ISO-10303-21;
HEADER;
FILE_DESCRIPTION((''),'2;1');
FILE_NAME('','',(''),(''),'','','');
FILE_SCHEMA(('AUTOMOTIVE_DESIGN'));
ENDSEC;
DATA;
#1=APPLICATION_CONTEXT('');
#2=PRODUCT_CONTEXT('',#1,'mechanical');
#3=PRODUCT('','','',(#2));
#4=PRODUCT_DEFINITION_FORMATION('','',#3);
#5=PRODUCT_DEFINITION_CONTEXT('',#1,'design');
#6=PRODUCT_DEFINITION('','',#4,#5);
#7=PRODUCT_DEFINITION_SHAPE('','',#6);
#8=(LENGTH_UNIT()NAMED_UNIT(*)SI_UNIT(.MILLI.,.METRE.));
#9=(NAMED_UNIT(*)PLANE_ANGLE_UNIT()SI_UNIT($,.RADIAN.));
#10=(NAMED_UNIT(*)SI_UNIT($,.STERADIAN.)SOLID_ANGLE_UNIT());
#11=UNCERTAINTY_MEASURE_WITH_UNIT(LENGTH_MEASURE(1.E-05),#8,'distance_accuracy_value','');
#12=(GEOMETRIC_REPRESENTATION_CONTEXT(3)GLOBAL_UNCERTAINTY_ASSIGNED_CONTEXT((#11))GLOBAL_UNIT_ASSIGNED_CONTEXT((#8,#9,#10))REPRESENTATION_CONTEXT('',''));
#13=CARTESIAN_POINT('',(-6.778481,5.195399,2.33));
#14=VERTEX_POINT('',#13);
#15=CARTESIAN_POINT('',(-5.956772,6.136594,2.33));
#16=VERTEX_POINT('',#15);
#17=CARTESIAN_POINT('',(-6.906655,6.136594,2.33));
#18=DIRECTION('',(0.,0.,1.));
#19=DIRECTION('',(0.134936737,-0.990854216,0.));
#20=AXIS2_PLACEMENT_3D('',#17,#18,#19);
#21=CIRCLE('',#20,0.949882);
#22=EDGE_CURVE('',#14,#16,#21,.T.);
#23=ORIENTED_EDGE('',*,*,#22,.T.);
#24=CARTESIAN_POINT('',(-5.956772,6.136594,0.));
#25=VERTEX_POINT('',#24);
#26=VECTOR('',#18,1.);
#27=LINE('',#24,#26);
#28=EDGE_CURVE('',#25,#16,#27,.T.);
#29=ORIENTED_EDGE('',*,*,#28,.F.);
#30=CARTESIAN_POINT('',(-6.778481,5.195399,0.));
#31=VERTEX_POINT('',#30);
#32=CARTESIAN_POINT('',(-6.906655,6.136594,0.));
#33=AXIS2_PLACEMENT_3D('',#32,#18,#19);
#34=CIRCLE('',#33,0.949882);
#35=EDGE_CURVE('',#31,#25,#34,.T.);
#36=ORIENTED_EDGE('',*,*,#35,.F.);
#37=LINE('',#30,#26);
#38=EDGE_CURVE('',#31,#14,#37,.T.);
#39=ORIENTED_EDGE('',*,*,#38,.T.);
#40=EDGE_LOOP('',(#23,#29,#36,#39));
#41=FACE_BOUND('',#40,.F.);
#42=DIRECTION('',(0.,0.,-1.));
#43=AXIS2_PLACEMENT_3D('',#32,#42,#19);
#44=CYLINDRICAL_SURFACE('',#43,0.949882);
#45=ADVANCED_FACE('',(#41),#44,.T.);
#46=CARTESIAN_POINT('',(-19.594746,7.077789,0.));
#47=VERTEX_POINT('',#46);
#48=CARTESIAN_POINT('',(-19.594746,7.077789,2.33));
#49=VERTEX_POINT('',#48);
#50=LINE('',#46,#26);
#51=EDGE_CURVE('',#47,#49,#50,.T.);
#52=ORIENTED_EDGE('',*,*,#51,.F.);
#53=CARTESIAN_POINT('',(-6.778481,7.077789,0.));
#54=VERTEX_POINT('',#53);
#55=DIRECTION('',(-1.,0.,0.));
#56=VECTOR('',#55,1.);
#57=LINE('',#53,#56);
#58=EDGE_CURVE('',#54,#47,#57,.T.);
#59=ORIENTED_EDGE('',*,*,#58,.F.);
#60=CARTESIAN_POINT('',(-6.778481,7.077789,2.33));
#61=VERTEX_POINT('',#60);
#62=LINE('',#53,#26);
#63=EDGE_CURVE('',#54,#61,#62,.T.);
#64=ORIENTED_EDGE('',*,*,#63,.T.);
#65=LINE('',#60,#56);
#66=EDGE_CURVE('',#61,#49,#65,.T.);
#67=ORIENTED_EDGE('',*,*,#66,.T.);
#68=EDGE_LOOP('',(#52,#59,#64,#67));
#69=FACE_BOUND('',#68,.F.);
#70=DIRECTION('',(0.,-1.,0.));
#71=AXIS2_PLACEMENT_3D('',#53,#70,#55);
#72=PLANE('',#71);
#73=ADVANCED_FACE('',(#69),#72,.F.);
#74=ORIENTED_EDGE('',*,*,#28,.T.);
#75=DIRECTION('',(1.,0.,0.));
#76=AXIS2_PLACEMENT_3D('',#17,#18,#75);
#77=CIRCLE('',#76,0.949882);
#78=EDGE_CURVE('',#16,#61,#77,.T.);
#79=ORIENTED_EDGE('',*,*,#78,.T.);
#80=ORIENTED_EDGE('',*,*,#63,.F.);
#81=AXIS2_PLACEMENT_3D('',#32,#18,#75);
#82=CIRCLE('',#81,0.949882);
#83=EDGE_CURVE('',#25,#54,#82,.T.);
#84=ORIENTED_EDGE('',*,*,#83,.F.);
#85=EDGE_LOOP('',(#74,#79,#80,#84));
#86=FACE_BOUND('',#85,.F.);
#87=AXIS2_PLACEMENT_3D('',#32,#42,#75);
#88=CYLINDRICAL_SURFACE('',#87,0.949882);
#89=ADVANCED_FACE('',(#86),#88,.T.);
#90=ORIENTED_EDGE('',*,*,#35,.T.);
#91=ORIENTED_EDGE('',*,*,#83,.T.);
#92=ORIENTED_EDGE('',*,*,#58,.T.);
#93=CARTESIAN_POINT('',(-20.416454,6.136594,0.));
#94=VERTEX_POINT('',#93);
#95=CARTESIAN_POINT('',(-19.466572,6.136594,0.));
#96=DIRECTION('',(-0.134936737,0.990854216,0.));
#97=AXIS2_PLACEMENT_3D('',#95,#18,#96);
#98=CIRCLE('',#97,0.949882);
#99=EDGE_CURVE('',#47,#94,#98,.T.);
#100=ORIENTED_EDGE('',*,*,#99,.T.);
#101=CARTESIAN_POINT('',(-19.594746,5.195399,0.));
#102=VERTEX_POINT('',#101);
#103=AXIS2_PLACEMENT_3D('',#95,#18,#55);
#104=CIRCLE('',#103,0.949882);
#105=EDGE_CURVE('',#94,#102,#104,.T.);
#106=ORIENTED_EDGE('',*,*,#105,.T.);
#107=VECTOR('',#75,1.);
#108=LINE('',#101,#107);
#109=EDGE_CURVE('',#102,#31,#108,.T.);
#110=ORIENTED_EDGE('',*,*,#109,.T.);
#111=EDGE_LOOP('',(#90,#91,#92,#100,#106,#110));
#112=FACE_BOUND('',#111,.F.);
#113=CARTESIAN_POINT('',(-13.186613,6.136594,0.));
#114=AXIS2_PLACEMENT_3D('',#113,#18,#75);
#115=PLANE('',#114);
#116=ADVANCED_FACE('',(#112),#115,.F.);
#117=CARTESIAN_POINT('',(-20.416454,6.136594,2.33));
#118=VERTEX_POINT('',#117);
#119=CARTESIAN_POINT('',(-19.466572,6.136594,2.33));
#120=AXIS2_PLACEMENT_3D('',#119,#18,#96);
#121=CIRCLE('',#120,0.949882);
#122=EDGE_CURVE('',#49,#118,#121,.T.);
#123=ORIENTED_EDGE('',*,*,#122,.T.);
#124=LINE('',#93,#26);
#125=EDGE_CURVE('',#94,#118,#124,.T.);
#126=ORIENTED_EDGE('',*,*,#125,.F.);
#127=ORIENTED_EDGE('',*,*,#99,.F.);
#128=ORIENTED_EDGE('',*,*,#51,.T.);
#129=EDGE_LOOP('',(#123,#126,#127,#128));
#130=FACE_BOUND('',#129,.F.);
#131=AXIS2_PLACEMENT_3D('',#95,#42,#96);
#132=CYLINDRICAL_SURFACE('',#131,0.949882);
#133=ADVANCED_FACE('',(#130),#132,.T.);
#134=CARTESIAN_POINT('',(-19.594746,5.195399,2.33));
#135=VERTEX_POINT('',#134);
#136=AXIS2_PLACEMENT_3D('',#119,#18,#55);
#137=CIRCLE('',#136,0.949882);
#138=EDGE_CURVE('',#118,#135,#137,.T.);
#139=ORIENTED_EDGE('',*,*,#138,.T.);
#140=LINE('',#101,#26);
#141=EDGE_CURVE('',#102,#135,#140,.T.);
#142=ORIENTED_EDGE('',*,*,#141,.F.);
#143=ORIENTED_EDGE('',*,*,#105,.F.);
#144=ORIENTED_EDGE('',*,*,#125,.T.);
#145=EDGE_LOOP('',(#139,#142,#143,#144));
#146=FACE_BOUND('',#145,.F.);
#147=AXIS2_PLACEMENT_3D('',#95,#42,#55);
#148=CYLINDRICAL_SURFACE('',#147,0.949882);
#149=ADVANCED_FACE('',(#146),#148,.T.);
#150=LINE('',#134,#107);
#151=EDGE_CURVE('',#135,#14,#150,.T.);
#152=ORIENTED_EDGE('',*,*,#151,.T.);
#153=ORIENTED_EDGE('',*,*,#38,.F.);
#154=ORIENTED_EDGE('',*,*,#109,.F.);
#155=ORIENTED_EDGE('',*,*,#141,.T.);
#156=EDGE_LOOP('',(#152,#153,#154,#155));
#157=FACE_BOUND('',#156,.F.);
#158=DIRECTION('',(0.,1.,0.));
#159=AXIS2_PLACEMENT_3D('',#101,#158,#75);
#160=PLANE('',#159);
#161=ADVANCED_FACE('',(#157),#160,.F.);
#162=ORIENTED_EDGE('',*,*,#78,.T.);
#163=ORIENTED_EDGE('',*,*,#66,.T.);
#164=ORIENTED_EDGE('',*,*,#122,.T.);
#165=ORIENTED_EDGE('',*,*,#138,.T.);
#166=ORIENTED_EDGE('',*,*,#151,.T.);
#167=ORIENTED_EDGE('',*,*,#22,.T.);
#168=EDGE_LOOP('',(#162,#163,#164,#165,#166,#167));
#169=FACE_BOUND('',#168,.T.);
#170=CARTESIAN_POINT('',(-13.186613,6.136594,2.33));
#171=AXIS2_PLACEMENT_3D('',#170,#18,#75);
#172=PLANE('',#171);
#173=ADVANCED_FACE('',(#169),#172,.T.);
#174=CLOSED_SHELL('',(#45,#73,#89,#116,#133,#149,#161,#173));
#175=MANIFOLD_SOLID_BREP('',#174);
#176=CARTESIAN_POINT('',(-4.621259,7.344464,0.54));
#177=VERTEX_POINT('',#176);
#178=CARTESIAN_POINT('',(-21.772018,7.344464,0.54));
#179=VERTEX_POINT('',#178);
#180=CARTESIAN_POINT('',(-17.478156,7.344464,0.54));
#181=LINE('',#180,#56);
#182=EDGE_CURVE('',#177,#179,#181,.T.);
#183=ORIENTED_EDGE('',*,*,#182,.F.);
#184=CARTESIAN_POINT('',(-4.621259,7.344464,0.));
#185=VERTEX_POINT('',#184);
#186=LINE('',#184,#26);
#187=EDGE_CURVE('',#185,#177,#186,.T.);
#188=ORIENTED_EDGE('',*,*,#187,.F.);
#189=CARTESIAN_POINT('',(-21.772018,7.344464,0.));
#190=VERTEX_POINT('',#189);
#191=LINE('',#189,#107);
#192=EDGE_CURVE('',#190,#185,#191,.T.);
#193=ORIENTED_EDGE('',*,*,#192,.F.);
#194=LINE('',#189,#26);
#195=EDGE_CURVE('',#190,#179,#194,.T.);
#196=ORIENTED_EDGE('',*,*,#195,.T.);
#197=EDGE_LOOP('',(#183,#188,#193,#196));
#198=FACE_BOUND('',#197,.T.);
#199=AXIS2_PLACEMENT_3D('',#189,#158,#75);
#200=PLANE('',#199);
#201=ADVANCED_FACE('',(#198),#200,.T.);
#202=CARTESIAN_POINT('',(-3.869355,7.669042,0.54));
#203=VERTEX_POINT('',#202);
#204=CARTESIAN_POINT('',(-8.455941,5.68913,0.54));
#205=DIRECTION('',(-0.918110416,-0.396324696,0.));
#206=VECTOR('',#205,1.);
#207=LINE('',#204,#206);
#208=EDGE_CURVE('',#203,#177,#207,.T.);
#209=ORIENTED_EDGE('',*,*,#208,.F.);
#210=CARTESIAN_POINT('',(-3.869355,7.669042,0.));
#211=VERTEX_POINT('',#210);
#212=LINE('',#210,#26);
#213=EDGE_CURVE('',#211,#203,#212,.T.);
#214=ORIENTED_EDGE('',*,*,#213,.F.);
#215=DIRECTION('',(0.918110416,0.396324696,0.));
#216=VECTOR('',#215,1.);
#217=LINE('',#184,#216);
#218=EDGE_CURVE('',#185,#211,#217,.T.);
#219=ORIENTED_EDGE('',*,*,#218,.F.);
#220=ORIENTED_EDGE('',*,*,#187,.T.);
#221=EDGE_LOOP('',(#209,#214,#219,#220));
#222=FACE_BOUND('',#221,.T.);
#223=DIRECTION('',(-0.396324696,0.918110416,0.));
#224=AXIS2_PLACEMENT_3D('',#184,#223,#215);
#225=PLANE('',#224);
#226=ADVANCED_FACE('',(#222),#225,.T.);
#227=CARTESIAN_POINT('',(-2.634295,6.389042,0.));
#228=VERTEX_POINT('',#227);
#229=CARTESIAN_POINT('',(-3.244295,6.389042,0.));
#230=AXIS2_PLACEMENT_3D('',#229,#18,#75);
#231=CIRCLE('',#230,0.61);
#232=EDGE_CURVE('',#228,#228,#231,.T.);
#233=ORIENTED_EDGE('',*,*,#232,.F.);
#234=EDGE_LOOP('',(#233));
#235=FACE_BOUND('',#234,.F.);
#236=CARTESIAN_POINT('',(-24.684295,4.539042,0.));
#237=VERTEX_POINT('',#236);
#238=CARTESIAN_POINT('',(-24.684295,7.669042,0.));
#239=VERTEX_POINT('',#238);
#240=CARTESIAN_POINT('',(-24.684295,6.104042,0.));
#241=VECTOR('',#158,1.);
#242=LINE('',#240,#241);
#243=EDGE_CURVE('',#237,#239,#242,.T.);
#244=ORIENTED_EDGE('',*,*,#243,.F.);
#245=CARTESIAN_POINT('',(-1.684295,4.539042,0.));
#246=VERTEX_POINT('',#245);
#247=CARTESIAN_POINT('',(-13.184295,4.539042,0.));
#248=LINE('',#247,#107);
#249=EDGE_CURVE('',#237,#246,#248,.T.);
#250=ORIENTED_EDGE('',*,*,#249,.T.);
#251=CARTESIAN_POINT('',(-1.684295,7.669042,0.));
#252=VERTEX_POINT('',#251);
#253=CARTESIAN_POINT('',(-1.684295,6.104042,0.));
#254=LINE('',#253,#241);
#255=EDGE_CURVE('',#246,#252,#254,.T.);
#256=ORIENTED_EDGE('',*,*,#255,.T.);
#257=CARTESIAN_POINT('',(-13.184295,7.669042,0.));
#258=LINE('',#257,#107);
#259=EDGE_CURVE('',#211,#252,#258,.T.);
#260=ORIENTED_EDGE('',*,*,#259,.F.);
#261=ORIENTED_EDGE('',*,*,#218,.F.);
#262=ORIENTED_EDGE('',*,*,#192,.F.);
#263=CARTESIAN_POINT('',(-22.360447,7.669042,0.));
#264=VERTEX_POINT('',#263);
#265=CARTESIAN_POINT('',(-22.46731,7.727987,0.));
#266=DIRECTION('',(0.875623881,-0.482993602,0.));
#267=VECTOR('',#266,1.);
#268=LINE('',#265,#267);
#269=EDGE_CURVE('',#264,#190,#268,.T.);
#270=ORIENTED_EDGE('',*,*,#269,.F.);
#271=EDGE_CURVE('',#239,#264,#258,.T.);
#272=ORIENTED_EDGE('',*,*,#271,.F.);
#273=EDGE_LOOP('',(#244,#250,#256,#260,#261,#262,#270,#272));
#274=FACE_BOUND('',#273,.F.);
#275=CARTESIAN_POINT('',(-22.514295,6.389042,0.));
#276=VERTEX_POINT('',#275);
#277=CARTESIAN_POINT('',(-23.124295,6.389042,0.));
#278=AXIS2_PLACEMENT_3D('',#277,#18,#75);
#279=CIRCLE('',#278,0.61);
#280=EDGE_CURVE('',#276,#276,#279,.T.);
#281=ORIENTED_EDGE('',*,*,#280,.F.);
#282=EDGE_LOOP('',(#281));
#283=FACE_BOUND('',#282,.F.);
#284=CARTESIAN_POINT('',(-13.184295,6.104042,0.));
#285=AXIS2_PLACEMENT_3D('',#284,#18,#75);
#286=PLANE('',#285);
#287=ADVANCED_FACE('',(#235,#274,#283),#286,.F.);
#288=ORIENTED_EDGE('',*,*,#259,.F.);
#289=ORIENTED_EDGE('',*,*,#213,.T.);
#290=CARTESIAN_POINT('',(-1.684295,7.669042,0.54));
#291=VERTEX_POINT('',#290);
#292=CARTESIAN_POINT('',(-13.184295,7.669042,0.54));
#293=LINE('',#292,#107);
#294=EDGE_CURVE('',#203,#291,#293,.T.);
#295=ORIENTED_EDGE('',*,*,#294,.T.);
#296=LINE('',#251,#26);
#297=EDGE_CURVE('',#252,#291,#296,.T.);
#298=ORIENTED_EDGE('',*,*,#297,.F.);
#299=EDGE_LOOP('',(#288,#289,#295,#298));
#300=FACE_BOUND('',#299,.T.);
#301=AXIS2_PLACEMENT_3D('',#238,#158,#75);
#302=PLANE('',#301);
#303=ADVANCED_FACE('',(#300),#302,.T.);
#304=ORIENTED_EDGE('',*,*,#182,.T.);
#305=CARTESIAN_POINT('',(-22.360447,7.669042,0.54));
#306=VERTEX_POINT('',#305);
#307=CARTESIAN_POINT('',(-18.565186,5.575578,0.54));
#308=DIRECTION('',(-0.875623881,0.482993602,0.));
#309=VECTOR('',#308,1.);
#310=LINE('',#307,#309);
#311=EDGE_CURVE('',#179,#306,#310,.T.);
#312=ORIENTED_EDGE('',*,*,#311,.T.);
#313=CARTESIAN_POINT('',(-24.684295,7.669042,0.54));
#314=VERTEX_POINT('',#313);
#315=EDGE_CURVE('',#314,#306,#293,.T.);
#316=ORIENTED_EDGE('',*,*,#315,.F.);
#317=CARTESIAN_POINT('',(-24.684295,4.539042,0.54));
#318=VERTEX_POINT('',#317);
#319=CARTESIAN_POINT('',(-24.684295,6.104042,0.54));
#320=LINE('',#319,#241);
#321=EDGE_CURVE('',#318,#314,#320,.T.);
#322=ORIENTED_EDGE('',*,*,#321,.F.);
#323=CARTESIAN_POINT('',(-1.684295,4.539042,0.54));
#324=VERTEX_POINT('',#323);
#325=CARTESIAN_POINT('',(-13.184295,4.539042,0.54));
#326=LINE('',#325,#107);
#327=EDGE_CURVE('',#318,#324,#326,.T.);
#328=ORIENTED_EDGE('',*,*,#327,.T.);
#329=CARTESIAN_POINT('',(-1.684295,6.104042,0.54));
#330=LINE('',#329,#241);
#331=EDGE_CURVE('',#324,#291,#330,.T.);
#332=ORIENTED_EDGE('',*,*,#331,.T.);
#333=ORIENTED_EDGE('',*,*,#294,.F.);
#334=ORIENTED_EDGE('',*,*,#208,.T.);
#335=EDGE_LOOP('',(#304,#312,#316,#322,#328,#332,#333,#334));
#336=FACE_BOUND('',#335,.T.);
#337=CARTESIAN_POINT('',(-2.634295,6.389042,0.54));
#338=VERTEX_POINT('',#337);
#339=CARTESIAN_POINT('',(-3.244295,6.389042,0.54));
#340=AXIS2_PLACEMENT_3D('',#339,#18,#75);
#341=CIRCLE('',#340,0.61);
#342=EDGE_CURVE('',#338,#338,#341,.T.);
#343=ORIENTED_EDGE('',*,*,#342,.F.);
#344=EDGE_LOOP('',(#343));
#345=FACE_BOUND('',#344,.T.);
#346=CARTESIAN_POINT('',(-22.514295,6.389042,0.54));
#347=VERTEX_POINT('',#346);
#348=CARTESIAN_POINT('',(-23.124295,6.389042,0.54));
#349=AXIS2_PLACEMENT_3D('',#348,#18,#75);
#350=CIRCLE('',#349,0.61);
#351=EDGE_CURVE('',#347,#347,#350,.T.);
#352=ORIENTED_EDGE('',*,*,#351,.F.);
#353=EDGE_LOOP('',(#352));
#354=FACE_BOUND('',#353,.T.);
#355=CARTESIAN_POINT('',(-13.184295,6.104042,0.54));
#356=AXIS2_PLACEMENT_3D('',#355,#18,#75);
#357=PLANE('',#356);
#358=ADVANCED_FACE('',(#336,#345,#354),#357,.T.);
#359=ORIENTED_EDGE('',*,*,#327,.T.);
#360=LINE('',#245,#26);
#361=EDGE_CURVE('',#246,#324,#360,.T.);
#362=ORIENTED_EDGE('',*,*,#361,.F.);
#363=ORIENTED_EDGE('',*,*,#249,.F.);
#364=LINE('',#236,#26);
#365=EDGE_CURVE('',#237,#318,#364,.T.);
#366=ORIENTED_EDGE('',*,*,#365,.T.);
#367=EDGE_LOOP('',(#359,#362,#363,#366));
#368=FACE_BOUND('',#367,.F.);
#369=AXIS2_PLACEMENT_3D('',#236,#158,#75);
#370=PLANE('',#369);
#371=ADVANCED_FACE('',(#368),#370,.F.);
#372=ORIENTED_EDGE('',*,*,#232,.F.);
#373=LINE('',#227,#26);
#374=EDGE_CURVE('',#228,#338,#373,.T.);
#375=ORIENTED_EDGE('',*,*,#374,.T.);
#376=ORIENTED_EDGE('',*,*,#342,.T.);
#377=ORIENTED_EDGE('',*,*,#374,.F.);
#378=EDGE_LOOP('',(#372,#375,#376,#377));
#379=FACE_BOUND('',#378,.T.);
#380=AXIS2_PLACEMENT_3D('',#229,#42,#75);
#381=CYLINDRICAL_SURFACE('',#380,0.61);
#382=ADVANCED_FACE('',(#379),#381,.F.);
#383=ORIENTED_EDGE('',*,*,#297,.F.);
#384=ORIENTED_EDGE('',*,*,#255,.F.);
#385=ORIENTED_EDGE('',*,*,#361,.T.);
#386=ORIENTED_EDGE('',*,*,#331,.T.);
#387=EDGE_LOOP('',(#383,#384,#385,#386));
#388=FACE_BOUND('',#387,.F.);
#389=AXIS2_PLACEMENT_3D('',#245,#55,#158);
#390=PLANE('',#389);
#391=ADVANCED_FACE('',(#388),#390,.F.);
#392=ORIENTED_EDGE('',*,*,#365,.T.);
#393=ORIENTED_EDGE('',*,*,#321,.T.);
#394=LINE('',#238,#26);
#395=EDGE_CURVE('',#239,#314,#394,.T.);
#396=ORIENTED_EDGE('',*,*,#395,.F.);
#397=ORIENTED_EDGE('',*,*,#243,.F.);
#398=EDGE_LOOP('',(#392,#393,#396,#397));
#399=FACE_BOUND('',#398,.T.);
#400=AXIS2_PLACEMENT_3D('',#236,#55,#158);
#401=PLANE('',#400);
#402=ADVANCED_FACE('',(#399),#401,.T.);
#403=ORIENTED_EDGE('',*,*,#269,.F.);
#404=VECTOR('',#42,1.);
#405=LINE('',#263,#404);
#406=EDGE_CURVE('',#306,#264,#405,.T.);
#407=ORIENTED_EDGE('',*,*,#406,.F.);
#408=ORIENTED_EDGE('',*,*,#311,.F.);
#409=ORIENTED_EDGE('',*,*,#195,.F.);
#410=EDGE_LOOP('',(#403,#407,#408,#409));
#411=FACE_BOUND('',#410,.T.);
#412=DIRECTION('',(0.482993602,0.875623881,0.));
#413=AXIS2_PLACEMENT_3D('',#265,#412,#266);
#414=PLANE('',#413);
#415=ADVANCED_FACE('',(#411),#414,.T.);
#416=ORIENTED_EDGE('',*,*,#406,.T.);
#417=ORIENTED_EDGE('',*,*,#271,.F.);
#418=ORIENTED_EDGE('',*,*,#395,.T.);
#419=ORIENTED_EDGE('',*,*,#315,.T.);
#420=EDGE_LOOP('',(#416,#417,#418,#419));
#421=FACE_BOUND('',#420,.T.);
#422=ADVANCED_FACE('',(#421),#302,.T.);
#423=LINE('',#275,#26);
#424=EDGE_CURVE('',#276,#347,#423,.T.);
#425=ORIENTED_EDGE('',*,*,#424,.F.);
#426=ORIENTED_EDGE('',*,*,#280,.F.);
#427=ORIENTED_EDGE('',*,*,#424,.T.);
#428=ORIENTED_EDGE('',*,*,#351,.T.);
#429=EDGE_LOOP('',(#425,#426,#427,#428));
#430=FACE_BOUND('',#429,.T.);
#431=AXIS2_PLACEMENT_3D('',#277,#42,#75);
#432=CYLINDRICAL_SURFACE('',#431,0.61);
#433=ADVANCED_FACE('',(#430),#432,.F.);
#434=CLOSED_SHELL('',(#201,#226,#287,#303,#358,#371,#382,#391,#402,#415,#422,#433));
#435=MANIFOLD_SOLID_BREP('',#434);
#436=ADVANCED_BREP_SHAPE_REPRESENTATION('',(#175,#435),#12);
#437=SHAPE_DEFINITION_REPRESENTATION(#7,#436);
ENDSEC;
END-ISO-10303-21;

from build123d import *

# Parameters (mm, degrees)
F0_W     = 23
F0_H     = 3.13
F2_DEPTH = 0.54
F1_R     = 0.61
F3_DEPTH = 0.54
F5_DEPTH = 2.33
F7_DEPTH = 25


# Not quite as in the source:
# - a feature names something its author has since deleted; it is built from what else it names


with BuildPart() as f2:
    # F0 (on Top) → F2 (new body)
    with BuildSketch(Plane.XY):
        with Locations((-13.1842952464, 6.1040417799)):
            Rectangle(F0_W, F0_H)
    extrude(amount=F2_DEPTH)

    # F1 (on Top) → F3 (cut)
    with BuildSketch(Plane.XY):
        with Locations((-23.1242952464, 6.3890417799)):
            Circle(F1_R)
        with Locations((-3.2442952464, 6.3890417799)):
            Circle(F1_R)
    extrude(amount=F3_DEPTH, mode=Mode.SUBTRACT)

    # F6 (on Top) → F7 (cut)
    with BuildSketch(Plane.XY):
        Polygon((-3.7328053731, 8.1115094945), (-22.4673096091, 8.1115094945), (-22.4673096091, 7.7279869001), (-21.7720177025, 7.3444643058), (-4.6212589368, 7.3444643058), (-3.7328053731, 7.7279869001), align=None)
    extrude(amount=F7_DEPTH, mode=Mode.SUBTRACT)


with BuildPart() as f5:
    # F4 (on Top) → F5 (new body)
    with BuildSketch(Plane.XY):
        with BuildLine():
            ThreePointArc((-20.4164541145, 6.1365935627), (-20.1821228313, 5.5118830758), (-19.5947457105, 5.1953985412))
            Line((-19.5947457105, 5.1953985412), (-6.7784807016, 5.1953985412))
            ThreePointArc((-6.7784807016, 5.1953985412), (-6.1911035808, 5.5118830758), (-5.9567722976, 6.1365935627))
            ThreePointArc((-5.9567722976, 6.1365935627), (-6.1911035808, 6.7613040496), (-6.7784807016, 7.0777885842))
            Line((-6.7784807016, 7.0777885842), (-19.5947457105, 7.0777885842))
            ThreePointArc((-19.5947457105, 7.0777885842), (-20.1821228313, 6.7613040496), (-20.4164541145, 6.1365935627))
        make_face()
    extrude(amount=F5_DEPTH)


solid = Compound([f2.part, f5.part])
